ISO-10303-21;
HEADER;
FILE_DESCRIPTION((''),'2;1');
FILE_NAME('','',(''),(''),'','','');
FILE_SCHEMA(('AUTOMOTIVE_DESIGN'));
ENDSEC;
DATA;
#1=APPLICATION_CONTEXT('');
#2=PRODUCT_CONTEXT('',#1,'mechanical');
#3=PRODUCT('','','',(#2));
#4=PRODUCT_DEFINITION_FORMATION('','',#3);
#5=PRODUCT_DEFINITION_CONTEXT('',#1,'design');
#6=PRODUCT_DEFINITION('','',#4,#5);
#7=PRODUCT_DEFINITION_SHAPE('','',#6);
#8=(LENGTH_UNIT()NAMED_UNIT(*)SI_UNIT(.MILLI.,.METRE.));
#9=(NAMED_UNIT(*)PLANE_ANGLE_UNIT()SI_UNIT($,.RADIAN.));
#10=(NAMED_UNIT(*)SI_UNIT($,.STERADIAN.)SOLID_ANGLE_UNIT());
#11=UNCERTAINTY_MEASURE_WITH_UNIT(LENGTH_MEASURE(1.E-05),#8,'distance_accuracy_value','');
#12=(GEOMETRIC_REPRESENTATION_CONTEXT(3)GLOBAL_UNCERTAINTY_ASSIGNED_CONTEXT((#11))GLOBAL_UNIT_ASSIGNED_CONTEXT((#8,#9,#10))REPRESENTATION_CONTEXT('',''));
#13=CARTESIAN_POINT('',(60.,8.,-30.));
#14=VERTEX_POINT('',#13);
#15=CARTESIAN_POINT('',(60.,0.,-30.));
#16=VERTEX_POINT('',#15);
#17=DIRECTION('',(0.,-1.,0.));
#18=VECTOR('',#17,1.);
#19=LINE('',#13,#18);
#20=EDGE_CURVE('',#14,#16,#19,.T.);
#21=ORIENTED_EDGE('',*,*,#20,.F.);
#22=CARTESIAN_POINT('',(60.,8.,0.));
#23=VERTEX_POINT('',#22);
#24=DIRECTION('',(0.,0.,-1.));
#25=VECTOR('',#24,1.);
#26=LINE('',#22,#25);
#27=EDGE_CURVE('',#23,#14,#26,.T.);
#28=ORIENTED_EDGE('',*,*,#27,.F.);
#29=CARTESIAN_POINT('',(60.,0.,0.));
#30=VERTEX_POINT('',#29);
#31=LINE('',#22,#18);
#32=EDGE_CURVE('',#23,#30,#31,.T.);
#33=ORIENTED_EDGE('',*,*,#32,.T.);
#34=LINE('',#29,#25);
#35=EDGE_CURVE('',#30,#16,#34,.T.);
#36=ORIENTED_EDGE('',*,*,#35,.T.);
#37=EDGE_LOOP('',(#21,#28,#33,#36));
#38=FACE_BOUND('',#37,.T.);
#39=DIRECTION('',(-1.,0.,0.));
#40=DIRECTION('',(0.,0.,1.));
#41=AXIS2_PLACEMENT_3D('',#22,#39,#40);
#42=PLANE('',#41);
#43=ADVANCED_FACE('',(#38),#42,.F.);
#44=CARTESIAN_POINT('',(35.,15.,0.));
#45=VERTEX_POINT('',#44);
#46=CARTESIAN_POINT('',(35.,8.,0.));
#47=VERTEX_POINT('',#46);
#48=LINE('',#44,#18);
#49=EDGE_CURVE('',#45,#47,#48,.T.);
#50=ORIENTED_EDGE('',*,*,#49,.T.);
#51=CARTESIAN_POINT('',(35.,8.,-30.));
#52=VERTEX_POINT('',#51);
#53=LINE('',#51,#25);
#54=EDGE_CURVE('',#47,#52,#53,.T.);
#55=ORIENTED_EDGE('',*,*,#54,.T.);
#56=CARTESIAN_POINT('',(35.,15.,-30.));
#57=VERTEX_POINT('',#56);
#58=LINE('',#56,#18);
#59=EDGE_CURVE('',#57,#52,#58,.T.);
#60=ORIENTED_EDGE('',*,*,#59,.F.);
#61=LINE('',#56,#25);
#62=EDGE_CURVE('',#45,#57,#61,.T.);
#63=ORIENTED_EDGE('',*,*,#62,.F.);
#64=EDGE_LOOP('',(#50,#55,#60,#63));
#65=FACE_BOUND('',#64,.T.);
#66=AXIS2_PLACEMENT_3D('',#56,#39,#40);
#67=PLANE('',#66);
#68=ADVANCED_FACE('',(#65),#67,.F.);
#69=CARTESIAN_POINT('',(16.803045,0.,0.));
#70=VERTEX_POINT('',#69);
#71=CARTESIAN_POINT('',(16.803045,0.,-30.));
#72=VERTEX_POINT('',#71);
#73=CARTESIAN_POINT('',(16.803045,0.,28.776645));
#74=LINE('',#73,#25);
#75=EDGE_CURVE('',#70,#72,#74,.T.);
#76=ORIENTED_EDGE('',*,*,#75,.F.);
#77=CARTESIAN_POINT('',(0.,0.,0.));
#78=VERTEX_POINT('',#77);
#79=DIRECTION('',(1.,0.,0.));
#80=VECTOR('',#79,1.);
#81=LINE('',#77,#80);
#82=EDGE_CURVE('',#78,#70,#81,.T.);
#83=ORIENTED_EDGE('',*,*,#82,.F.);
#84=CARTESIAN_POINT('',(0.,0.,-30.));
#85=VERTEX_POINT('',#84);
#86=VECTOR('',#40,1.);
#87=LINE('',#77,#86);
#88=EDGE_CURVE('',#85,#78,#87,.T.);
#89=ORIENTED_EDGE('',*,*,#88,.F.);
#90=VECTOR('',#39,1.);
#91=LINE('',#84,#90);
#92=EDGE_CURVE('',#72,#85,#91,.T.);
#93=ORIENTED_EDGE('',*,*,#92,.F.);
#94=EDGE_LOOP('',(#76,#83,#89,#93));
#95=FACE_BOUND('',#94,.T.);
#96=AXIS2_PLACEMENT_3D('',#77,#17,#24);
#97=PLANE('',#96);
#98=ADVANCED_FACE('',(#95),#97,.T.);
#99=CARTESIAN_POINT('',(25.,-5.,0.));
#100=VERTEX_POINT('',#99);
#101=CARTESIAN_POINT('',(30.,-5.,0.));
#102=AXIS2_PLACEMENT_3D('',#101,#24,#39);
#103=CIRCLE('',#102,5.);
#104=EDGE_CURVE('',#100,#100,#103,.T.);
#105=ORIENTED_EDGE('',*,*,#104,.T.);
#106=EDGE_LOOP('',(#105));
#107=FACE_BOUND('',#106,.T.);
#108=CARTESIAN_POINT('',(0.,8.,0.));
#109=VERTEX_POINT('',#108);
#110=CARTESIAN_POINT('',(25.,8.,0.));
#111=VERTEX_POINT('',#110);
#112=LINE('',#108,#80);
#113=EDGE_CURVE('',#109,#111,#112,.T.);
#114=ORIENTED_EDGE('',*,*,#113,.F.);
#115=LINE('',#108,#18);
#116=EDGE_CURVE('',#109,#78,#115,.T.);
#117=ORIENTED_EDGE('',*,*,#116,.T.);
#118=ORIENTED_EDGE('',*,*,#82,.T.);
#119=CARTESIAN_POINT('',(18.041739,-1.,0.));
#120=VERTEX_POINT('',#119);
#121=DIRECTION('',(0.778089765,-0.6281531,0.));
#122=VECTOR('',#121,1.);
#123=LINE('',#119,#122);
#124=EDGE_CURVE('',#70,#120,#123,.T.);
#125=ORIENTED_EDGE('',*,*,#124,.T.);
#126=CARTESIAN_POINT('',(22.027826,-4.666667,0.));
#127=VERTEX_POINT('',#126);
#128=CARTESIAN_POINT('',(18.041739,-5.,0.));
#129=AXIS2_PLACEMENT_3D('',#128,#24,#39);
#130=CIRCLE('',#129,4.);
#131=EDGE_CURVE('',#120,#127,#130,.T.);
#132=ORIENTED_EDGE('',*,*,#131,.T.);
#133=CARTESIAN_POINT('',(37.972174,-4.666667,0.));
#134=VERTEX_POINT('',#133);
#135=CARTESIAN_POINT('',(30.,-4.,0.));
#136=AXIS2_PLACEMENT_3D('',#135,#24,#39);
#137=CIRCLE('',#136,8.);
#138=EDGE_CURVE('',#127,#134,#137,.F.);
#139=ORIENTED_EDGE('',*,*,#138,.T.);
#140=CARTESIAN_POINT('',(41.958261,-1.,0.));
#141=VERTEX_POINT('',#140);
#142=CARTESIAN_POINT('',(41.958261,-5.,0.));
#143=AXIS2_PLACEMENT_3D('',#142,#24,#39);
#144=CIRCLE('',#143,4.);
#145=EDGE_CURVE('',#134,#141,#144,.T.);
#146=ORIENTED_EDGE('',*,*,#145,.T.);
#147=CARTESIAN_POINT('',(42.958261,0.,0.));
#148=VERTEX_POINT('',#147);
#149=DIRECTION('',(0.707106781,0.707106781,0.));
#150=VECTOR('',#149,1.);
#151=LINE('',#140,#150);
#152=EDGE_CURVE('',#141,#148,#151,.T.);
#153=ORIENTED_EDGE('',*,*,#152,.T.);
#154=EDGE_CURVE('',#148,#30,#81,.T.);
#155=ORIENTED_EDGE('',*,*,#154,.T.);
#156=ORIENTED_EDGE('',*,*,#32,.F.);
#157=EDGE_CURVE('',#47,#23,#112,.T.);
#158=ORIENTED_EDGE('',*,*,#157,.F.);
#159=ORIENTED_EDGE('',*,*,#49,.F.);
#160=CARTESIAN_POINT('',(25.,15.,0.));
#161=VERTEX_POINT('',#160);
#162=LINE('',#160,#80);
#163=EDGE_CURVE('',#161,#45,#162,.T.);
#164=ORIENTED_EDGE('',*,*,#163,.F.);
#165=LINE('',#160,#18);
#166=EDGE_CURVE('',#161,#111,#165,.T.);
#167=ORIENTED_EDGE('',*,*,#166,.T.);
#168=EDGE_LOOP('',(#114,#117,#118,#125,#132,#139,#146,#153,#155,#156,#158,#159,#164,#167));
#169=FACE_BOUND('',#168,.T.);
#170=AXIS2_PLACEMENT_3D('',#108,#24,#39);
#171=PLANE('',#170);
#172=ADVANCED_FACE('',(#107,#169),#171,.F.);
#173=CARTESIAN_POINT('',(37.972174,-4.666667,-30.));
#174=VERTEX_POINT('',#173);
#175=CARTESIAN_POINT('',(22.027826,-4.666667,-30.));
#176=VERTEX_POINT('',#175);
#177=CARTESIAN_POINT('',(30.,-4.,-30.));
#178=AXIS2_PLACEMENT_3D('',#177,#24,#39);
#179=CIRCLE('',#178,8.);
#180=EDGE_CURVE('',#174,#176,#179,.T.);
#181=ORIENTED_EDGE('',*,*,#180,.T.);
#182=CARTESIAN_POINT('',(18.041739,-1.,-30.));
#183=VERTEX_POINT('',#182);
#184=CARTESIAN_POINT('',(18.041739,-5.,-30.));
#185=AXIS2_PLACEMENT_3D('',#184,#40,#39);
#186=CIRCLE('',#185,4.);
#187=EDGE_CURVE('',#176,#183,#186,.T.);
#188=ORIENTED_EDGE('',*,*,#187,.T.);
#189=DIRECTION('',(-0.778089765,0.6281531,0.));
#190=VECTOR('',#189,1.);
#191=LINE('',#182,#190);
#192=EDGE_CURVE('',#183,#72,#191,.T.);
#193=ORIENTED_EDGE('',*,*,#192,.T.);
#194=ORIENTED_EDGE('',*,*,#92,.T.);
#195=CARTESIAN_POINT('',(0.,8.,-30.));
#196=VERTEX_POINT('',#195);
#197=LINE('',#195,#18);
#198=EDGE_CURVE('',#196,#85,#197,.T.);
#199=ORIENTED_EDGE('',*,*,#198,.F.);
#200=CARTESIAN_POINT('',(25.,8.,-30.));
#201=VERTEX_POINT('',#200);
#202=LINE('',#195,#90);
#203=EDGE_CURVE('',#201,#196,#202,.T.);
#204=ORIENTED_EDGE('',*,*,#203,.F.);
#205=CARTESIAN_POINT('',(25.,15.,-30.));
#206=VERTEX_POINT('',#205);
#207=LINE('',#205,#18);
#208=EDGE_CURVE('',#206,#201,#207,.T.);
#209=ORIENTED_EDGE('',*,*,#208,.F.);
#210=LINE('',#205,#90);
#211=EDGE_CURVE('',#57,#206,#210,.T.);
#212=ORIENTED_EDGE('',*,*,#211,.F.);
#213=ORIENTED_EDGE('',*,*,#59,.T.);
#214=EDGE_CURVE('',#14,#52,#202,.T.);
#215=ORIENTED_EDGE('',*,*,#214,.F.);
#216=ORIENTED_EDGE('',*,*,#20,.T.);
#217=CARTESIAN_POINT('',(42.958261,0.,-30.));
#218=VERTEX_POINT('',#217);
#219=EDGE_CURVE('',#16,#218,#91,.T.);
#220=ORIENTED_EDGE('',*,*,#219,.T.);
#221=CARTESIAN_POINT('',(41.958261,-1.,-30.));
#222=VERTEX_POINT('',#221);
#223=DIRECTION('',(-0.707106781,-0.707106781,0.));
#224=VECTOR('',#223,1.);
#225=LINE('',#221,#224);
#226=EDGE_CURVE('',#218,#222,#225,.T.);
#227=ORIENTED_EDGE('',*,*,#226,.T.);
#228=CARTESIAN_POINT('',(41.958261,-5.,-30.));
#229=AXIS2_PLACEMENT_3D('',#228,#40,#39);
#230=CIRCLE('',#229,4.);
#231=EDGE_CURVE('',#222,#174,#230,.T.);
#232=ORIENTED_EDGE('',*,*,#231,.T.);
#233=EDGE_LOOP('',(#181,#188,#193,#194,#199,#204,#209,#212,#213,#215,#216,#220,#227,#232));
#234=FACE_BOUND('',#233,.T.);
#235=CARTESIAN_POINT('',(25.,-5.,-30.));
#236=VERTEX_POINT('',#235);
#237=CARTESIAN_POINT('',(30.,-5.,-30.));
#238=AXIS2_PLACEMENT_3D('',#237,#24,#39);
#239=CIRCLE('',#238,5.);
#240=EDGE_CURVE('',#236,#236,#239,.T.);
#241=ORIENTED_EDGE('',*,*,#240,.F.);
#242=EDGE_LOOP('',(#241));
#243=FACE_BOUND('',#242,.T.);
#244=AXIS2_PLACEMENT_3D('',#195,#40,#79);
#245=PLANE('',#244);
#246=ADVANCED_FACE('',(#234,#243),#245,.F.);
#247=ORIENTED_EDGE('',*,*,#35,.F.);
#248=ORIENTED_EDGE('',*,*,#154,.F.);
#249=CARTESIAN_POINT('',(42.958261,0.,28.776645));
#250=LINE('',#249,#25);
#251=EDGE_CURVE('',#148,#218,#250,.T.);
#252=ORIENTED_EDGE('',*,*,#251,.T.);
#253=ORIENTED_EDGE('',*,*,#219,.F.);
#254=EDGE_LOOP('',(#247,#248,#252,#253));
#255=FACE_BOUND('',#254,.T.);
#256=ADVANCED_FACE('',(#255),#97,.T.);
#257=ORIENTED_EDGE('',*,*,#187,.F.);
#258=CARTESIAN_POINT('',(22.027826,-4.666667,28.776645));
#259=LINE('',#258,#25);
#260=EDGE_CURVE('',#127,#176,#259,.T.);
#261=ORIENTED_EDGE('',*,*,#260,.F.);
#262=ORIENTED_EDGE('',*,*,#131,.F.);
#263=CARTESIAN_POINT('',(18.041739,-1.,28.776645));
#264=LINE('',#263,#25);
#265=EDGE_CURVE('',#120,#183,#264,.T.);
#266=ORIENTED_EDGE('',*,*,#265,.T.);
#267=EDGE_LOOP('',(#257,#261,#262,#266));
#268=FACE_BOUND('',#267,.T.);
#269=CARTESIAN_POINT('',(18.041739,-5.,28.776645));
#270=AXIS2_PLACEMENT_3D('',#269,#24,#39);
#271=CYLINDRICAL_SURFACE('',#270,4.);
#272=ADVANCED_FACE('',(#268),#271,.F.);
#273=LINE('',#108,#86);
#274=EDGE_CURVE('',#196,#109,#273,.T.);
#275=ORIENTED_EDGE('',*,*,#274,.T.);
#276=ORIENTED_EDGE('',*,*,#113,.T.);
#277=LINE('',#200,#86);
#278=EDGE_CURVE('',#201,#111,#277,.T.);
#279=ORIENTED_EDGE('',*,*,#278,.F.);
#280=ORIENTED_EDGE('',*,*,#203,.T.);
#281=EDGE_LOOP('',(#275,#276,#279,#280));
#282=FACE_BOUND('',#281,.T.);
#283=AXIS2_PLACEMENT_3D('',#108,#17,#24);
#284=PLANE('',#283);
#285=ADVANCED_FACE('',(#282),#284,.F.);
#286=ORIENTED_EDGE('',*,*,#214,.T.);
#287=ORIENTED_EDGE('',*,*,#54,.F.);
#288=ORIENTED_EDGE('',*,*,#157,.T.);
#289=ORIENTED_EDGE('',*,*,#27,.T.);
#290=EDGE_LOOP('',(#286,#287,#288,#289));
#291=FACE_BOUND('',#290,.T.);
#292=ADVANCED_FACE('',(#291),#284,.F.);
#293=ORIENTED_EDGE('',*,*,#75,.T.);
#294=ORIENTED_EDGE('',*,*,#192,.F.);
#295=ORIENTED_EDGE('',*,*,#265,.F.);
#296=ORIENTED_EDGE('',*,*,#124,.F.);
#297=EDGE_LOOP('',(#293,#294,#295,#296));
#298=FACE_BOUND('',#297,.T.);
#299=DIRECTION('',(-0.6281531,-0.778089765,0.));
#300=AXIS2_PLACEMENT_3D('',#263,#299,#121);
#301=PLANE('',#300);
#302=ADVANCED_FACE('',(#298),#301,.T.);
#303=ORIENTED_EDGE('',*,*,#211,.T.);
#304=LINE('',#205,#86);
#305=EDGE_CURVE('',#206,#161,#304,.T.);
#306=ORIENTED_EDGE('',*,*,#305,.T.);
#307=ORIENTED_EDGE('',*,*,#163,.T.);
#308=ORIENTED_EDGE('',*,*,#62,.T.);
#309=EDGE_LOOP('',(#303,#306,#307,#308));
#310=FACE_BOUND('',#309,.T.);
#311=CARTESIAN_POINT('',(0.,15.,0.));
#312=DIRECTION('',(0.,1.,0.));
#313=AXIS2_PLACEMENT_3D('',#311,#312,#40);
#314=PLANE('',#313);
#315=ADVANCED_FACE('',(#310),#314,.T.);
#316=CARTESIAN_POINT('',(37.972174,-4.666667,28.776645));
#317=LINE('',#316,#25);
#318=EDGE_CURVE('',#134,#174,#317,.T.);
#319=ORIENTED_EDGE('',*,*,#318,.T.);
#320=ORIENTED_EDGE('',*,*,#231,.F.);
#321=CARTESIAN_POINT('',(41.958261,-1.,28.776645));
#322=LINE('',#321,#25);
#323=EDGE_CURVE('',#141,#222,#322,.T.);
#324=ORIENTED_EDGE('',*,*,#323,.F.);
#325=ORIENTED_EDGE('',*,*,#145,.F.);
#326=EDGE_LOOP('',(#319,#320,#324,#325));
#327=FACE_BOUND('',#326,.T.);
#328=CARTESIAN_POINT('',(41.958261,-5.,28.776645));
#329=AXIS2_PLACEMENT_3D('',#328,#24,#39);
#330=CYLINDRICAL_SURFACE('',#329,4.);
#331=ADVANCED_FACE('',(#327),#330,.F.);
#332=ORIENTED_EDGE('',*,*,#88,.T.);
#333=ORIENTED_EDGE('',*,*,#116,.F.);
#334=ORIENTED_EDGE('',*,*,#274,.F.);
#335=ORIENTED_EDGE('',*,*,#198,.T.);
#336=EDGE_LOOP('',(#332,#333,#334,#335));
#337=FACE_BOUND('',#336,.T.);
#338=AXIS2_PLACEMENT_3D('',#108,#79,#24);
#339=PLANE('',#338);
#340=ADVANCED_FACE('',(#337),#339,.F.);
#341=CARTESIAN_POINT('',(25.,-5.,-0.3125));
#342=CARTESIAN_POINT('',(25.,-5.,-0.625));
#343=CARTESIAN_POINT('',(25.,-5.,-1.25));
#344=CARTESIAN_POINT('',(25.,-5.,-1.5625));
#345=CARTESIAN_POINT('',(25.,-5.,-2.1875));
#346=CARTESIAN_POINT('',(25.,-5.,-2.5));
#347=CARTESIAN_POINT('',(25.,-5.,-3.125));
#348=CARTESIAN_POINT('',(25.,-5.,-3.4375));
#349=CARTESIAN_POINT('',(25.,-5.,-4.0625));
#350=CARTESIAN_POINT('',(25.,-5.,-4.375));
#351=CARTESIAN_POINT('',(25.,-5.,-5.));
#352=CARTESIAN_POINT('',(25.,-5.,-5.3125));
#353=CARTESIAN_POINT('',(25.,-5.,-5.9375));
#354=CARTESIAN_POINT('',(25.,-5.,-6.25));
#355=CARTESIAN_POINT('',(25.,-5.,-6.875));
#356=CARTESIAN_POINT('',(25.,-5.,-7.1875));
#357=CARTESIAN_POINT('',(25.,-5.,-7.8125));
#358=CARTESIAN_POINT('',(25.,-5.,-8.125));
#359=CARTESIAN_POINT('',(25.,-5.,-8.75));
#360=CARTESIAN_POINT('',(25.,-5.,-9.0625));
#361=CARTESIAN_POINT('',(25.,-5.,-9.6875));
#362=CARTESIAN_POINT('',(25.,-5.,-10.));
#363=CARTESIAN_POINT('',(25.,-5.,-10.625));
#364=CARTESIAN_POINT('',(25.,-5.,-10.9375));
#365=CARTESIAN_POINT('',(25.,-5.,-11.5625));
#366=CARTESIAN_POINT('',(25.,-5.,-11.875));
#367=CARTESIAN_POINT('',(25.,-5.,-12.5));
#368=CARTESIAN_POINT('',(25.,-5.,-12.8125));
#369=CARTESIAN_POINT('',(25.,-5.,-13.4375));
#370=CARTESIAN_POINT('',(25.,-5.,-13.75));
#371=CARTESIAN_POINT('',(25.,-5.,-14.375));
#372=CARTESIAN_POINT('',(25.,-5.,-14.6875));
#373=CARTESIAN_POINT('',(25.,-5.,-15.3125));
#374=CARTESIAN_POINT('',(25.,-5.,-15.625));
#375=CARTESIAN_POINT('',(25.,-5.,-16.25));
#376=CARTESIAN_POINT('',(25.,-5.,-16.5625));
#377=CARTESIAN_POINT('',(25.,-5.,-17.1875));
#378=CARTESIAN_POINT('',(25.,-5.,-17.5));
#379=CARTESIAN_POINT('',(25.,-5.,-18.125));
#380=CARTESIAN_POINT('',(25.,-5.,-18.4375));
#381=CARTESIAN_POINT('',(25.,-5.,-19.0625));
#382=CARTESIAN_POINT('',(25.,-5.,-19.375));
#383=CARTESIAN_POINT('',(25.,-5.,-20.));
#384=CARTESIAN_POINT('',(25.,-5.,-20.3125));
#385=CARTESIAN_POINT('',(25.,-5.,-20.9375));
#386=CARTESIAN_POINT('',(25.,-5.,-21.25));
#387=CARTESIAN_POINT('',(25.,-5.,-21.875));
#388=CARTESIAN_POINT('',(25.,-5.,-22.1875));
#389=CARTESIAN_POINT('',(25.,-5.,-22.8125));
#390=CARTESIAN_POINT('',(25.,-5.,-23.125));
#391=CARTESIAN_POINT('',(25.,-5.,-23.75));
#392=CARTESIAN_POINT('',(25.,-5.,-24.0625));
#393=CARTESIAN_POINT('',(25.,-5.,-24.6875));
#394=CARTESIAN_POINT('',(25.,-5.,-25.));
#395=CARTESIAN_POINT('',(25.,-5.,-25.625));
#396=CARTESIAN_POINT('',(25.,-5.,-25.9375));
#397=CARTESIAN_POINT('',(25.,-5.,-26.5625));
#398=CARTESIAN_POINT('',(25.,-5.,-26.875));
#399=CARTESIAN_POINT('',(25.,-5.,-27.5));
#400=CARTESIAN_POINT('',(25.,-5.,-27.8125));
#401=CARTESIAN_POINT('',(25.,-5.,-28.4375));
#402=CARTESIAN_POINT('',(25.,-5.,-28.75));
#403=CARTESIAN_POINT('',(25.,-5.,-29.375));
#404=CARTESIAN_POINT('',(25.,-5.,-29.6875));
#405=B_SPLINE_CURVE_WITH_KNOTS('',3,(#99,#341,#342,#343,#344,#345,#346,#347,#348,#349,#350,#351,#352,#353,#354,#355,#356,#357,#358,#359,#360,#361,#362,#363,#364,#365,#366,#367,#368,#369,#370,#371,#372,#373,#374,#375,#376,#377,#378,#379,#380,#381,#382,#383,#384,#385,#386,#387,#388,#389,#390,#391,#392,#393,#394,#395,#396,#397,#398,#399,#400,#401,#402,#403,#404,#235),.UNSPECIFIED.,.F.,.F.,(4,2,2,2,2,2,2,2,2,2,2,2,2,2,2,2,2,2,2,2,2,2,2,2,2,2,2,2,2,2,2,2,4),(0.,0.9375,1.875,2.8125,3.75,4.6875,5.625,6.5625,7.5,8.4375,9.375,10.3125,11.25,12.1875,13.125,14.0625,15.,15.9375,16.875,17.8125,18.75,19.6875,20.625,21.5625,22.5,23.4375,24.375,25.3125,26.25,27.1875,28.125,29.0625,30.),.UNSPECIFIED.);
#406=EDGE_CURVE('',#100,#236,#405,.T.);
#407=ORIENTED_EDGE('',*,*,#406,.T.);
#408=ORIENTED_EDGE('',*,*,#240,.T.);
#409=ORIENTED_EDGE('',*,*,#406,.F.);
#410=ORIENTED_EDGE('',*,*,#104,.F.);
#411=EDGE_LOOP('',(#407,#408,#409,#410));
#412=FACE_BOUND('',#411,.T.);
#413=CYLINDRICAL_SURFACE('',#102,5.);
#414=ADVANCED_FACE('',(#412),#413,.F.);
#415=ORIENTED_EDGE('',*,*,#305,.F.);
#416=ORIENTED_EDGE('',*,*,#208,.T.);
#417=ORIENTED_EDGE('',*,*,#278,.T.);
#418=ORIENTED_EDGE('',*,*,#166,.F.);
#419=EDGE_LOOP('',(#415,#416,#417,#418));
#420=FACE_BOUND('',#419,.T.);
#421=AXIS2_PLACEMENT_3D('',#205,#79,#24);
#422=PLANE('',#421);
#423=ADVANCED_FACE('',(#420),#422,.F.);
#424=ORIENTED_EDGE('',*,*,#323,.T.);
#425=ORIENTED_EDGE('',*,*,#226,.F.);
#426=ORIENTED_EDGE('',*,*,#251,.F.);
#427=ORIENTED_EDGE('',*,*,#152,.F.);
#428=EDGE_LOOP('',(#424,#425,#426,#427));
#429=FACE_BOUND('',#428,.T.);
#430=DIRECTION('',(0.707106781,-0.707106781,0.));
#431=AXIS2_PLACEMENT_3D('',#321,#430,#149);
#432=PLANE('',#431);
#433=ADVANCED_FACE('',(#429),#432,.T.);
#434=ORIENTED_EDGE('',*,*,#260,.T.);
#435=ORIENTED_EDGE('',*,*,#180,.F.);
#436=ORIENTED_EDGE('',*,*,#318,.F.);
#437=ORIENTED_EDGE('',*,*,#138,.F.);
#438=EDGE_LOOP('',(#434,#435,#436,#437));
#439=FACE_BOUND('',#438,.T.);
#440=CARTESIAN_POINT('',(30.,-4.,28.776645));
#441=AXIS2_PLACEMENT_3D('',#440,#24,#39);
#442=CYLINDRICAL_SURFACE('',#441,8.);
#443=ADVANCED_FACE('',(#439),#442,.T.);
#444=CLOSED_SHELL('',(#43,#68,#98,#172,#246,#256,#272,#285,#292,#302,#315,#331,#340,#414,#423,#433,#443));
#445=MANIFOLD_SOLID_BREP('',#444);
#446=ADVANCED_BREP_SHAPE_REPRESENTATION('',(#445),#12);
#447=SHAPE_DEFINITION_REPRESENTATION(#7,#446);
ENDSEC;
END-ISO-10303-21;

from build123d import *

# Parameters (mm, degrees)
SKETCH1_W           = 60
SKETCH1_H           = 30
BOSS_EXTRUDE1_DEPTH = 8
SKETCH3_W           = 10
SKETCH3_H           = 30
BOSS_EXTRUDE5_DEPTH = 7
SKETCH5_W           = 14
SKETCH5_H           = 30
BOSS_EXTRUDE6_DEPTH = 11
SKETCH6_R           = 5
CUT_EXTRUDE1_DEPTH  = 69.738635424
FILLET1_R           = 7
FILLET2_R           = 5
FILLET3_R           = 5
BOSS_EXTRUDE7_DEPTH = 30


with BuildPart() as part:
    # Sketch1 → Boss-Extrude1 (new body)
    with BuildSketch(Plane(origin=(0, 0, 0), x_dir=(1, 0, 0), z_dir=(0, 1, 0))):
        with Locations((30, 15)):
            Rectangle(SKETCH1_W, SKETCH1_H)
    extrude(amount=BOSS_EXTRUDE1_DEPTH)

    # Sketch3 → Boss-Extrude5 (add)
    with BuildSketch(Plane(origin=(0, 8, 0), x_dir=(1, 0, 0), z_dir=(0, 1, 0))):
        with Locations((30, 15)):
            Rectangle(SKETCH3_W, SKETCH3_H)
    extrude(amount=BOSS_EXTRUDE5_DEPTH)

    # Sketch5 → Boss-Extrude6 (add)
    with BuildSketch(Plane.XZ):
        with Locations((30, -15)):
            Rectangle(SKETCH5_W, SKETCH5_H)
    extrude(amount=BOSS_EXTRUDE6_DEPTH)

    # Sketch6 → Cut-Extrude1 (cut, through all)
    with BuildSketch(Plane(origin=(0, 0, -30), x_dir=(-1, 0, 0), z_dir=(0, 0, -1))):
        with Locations((-30, -5)):
            Circle(SKETCH6_R)
    extrude(amount=-CUT_EXTRUDE1_DEPTH, mode=Mode.SUBTRACT)

    # Fillet1
    fillet1_edges = [part.edges().sort_by_distance(p)[0] for p in [
        (23, -11, -15),
        (37, -11, -15),
    ]]
    fillet(fillet1_edges, radius=FILLET1_R - 0.0001)  # a hair under: the kernel refuses the full size

    # Fillet2
    fillet2_edges = [part.edges().sort_by_distance(p)[0] for p in [
        (23, 0, -15),
    ]]
    fillet(fillet2_edges, radius=FILLET2_R)

    # Fillet3
    fillet3_edges = [part.edges().sort_by_distance(p)[0] for p in [
        (37, 0, -15),
    ]]
    fillet(fillet3_edges, radius=FILLET3_R)

    # Sketch8 → Boss-Extrude7 (add)
    with BuildSketch(Plane(origin=(0, 0, -30), x_dir=(-1, 0, 0), z_dir=(0, 0, -1))):
        with BuildLine():
            Line((-41.958260743, -1), (-42.958260743, 0))
            Line((-42.958260743, 0), (-41.958260743, 0))
            ThreePointArc((-41.958260743, 0), (-38.573244741, -1.320099639), (-36.9756521, -4.583333333))
            ThreePointArc((-36.9756521, -4.583333333), (-34.739022403, -9.151860505), (-30, -11))
            ThreePointArc((-30, -11), (-25.260977597, -9.151860505), (-23.0243479, -4.583333333))
            ThreePointArc((-23.0243479, -4.583333333), (-21.426755259, -1.320099639), (-18.041739257, 0))
            Line((-18.041739257, 0), (-16.803044796, 0))
            Line((-16.803044796, 0), (-18.041739257, -1))
            ThreePointArc((-18.041739257, -1), (-20.749752058, -2.056079711), (-22.027826171, -4.666666667))
            ThreePointArc((-22.027826171, -4.666666667), (-24.583974397, -9.887840578), (-30, -12))
            ThreePointArc((-30, -12), (-35.416025603, -9.887840578), (-37.972173829, -4.666666667))
            ThreePointArc((-37.972173829, -4.666666667), (-39.250247942, -2.056079711), (-41.958260743, -1))
        make_face()
    extrude(amount=-BOSS_EXTRUDE7_DEPTH)


solid = part.part
